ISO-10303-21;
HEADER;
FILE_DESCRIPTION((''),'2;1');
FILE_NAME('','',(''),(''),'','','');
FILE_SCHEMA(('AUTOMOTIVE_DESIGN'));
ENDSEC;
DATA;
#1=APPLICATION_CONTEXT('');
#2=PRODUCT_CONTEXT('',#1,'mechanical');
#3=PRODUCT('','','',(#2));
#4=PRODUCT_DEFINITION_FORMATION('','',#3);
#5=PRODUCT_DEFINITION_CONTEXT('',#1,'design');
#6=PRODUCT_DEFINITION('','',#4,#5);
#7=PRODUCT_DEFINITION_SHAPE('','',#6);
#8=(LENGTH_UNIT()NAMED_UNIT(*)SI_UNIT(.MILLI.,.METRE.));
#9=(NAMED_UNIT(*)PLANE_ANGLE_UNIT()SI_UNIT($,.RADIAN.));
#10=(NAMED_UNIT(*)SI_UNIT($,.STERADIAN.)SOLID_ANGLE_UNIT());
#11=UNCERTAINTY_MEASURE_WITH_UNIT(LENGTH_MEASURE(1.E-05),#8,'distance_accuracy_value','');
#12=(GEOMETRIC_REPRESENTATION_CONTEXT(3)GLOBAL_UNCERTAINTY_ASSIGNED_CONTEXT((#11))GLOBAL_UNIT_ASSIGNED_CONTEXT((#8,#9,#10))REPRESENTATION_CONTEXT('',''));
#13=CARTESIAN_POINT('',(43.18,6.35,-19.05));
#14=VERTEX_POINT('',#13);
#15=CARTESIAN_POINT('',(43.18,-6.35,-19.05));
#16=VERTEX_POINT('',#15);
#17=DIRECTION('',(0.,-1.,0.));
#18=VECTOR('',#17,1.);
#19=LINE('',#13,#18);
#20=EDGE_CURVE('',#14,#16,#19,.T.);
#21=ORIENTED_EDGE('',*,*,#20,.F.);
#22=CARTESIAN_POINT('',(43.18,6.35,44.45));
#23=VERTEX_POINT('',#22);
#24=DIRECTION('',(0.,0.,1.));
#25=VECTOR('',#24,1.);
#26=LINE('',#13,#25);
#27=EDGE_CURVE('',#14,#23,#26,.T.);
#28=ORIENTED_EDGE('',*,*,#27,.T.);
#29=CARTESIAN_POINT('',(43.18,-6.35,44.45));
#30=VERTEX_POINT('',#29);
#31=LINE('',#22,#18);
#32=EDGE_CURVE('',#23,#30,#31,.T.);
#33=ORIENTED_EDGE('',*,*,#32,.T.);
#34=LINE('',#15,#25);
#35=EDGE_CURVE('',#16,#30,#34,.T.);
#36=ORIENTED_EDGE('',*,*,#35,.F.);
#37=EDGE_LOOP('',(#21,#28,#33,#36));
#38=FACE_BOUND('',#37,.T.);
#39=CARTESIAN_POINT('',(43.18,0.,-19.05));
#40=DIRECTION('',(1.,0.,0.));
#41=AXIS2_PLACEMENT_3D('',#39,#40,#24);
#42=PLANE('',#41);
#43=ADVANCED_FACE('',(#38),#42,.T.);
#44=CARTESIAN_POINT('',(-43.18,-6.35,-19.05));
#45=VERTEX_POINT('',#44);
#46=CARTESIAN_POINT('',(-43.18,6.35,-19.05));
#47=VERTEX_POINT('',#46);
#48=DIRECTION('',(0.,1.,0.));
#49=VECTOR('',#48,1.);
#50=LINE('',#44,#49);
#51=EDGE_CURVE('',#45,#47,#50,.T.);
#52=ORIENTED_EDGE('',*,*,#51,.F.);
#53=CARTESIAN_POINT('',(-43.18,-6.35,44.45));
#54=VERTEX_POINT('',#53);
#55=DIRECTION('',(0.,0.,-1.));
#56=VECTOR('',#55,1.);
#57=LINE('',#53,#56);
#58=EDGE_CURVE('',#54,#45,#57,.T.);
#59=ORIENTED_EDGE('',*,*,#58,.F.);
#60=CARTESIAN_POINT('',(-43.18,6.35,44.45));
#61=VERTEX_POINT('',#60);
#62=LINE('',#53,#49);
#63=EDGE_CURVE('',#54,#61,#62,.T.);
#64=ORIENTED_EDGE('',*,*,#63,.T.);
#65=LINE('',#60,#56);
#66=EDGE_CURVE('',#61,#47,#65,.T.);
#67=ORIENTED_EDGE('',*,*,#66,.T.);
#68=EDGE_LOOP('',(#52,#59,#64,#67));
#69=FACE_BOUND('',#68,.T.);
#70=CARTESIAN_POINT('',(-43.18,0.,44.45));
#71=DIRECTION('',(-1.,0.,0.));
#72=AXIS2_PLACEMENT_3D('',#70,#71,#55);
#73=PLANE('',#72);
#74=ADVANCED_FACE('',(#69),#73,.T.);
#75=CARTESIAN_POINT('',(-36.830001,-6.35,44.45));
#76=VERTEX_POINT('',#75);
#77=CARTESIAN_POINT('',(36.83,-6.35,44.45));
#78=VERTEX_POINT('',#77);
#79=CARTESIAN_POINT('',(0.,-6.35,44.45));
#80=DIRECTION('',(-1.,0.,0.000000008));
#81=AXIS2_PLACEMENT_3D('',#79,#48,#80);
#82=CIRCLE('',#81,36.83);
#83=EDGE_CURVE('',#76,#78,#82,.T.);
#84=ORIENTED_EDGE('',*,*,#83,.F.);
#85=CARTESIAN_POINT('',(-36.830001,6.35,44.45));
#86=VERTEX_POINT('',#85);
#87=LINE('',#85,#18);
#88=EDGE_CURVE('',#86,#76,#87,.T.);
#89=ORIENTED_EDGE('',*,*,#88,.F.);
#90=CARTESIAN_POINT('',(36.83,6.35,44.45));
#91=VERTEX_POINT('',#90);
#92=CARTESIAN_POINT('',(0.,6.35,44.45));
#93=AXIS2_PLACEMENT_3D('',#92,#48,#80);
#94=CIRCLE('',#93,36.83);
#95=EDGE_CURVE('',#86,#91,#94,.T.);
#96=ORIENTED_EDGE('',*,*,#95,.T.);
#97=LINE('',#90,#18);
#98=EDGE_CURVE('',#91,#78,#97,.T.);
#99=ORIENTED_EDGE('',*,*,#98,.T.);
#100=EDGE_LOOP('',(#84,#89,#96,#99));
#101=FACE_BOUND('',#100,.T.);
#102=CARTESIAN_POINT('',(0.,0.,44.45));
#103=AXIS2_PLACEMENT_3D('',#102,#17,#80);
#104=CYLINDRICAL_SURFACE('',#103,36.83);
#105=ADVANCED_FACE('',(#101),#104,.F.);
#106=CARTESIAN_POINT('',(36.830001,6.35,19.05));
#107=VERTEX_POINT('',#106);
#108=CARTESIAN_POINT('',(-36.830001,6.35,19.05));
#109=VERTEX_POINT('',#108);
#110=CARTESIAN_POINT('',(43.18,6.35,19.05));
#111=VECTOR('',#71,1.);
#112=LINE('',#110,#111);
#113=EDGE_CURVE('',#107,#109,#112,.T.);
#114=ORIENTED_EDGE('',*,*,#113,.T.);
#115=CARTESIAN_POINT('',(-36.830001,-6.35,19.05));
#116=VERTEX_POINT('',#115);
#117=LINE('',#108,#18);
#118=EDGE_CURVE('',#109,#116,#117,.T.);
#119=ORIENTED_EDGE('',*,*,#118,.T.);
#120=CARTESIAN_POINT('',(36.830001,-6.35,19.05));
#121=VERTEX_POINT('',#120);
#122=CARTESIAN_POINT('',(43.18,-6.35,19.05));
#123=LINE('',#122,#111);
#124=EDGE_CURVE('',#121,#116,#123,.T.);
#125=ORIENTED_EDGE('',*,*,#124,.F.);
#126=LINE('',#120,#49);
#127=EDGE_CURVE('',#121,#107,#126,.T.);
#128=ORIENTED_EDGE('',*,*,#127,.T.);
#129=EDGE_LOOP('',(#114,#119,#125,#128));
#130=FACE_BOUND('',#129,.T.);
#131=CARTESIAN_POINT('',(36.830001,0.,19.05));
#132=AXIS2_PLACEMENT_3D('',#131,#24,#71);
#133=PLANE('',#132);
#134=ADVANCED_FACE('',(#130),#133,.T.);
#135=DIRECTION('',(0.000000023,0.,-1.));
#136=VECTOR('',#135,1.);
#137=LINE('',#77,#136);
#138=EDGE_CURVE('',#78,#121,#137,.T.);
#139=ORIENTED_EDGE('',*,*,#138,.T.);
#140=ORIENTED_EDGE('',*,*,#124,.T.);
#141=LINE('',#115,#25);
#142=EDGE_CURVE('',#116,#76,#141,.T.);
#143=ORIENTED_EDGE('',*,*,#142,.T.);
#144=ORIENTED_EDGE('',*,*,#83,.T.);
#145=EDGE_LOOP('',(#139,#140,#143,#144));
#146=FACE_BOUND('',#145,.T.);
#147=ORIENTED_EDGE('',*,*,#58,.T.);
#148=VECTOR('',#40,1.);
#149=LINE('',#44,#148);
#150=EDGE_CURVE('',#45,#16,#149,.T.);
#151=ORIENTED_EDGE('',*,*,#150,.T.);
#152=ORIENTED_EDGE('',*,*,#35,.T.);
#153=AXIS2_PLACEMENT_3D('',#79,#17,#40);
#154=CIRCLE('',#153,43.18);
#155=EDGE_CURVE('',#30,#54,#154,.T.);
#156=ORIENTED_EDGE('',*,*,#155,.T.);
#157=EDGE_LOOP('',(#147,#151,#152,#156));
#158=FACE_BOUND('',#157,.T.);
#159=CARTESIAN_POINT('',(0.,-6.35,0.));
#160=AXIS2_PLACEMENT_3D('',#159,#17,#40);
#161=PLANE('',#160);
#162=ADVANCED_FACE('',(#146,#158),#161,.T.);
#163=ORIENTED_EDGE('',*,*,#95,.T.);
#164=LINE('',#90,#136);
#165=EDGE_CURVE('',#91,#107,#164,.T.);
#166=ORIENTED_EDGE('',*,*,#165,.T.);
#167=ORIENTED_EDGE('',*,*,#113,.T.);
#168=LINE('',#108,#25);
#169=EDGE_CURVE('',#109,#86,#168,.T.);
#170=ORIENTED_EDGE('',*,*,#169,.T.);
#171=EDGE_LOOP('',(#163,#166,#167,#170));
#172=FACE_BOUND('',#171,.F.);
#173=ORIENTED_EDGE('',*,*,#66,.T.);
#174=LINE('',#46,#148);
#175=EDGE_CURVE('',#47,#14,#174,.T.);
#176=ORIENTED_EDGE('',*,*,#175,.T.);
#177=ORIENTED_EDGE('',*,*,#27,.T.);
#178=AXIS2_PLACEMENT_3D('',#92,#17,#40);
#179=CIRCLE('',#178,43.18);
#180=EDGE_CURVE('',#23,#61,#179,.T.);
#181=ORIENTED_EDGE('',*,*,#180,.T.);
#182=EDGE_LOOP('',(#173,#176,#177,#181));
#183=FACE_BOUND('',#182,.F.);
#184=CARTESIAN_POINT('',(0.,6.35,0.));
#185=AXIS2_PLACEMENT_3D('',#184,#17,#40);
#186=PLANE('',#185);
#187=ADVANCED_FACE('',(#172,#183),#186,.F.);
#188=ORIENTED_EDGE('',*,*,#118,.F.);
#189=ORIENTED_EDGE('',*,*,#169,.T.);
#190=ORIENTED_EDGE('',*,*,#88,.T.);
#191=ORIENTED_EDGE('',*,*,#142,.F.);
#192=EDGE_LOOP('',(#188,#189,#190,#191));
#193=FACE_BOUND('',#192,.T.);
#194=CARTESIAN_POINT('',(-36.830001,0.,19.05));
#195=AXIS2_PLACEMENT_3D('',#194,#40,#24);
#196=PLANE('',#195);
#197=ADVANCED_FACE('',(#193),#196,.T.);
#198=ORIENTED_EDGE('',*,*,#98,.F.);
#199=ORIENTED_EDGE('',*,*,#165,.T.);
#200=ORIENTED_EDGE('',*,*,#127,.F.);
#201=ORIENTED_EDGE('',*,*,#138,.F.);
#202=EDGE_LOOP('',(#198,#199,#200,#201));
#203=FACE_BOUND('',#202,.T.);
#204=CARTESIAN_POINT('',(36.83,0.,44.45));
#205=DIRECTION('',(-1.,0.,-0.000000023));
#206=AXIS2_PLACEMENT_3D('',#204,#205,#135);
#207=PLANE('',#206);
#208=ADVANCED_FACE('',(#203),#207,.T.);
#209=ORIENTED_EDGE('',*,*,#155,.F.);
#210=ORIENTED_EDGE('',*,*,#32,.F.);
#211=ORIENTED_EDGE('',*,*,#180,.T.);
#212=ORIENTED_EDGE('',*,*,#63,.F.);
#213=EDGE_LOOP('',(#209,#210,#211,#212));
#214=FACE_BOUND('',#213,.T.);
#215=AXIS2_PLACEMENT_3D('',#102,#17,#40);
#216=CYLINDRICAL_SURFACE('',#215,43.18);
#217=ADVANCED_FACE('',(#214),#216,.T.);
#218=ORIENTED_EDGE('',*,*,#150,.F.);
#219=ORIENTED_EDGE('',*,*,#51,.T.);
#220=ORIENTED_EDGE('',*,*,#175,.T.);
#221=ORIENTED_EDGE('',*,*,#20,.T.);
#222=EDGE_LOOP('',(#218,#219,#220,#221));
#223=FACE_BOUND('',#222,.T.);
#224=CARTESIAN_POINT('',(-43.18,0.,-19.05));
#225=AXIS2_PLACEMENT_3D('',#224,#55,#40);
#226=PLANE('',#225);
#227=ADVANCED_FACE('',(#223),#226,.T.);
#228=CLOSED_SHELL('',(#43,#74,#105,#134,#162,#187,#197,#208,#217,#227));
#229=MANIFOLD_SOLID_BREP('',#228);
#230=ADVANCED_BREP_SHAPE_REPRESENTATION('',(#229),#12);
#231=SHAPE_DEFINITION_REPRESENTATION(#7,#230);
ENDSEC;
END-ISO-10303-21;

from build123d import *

# Parameters (mm, degrees)
F1_DEPTH = 6.35


# Not quite as in the source:
# - ends of sketch curves that miss each other by under 0.0002 mm in the source are joined


with BuildPart() as f1:
    # F0 (on Front) → F1 (new body, symmetric)
    with BuildSketch(Plane.XZ):
        Polygon((-36.8300005794, 19.05), (-43.18, 19.05), (-43.18, -19.05), (43.18, -19.05), (43.18, 19.05), (36.8300005794, 19.05), align=None)
        with BuildLine():
            Line((-43.18, 44.45), (-43.18, 19.05))
            Line((-43.18, 19.05), (-36.8300005794, 19.05))
            Line((-36.8300005794, 19.05), (-36.8300005794, 44.45))
            ThreePointArc((-36.8300005794, 44.45), (0, 81.28), (36.83, 44.45))
            Line((36.83, 44.45), (36.8300005794, 19.05))
            Line((36.8300005794, 19.05), (43.18, 19.05))
            Line((43.18, 19.05), (43.18, 44.45))
            ThreePointArc((43.18, 44.45), (0, 87.63), (-43.18, 44.45))
        make_face()
    extrude(amount=F1_DEPTH, both=True)


solid = f1.part
